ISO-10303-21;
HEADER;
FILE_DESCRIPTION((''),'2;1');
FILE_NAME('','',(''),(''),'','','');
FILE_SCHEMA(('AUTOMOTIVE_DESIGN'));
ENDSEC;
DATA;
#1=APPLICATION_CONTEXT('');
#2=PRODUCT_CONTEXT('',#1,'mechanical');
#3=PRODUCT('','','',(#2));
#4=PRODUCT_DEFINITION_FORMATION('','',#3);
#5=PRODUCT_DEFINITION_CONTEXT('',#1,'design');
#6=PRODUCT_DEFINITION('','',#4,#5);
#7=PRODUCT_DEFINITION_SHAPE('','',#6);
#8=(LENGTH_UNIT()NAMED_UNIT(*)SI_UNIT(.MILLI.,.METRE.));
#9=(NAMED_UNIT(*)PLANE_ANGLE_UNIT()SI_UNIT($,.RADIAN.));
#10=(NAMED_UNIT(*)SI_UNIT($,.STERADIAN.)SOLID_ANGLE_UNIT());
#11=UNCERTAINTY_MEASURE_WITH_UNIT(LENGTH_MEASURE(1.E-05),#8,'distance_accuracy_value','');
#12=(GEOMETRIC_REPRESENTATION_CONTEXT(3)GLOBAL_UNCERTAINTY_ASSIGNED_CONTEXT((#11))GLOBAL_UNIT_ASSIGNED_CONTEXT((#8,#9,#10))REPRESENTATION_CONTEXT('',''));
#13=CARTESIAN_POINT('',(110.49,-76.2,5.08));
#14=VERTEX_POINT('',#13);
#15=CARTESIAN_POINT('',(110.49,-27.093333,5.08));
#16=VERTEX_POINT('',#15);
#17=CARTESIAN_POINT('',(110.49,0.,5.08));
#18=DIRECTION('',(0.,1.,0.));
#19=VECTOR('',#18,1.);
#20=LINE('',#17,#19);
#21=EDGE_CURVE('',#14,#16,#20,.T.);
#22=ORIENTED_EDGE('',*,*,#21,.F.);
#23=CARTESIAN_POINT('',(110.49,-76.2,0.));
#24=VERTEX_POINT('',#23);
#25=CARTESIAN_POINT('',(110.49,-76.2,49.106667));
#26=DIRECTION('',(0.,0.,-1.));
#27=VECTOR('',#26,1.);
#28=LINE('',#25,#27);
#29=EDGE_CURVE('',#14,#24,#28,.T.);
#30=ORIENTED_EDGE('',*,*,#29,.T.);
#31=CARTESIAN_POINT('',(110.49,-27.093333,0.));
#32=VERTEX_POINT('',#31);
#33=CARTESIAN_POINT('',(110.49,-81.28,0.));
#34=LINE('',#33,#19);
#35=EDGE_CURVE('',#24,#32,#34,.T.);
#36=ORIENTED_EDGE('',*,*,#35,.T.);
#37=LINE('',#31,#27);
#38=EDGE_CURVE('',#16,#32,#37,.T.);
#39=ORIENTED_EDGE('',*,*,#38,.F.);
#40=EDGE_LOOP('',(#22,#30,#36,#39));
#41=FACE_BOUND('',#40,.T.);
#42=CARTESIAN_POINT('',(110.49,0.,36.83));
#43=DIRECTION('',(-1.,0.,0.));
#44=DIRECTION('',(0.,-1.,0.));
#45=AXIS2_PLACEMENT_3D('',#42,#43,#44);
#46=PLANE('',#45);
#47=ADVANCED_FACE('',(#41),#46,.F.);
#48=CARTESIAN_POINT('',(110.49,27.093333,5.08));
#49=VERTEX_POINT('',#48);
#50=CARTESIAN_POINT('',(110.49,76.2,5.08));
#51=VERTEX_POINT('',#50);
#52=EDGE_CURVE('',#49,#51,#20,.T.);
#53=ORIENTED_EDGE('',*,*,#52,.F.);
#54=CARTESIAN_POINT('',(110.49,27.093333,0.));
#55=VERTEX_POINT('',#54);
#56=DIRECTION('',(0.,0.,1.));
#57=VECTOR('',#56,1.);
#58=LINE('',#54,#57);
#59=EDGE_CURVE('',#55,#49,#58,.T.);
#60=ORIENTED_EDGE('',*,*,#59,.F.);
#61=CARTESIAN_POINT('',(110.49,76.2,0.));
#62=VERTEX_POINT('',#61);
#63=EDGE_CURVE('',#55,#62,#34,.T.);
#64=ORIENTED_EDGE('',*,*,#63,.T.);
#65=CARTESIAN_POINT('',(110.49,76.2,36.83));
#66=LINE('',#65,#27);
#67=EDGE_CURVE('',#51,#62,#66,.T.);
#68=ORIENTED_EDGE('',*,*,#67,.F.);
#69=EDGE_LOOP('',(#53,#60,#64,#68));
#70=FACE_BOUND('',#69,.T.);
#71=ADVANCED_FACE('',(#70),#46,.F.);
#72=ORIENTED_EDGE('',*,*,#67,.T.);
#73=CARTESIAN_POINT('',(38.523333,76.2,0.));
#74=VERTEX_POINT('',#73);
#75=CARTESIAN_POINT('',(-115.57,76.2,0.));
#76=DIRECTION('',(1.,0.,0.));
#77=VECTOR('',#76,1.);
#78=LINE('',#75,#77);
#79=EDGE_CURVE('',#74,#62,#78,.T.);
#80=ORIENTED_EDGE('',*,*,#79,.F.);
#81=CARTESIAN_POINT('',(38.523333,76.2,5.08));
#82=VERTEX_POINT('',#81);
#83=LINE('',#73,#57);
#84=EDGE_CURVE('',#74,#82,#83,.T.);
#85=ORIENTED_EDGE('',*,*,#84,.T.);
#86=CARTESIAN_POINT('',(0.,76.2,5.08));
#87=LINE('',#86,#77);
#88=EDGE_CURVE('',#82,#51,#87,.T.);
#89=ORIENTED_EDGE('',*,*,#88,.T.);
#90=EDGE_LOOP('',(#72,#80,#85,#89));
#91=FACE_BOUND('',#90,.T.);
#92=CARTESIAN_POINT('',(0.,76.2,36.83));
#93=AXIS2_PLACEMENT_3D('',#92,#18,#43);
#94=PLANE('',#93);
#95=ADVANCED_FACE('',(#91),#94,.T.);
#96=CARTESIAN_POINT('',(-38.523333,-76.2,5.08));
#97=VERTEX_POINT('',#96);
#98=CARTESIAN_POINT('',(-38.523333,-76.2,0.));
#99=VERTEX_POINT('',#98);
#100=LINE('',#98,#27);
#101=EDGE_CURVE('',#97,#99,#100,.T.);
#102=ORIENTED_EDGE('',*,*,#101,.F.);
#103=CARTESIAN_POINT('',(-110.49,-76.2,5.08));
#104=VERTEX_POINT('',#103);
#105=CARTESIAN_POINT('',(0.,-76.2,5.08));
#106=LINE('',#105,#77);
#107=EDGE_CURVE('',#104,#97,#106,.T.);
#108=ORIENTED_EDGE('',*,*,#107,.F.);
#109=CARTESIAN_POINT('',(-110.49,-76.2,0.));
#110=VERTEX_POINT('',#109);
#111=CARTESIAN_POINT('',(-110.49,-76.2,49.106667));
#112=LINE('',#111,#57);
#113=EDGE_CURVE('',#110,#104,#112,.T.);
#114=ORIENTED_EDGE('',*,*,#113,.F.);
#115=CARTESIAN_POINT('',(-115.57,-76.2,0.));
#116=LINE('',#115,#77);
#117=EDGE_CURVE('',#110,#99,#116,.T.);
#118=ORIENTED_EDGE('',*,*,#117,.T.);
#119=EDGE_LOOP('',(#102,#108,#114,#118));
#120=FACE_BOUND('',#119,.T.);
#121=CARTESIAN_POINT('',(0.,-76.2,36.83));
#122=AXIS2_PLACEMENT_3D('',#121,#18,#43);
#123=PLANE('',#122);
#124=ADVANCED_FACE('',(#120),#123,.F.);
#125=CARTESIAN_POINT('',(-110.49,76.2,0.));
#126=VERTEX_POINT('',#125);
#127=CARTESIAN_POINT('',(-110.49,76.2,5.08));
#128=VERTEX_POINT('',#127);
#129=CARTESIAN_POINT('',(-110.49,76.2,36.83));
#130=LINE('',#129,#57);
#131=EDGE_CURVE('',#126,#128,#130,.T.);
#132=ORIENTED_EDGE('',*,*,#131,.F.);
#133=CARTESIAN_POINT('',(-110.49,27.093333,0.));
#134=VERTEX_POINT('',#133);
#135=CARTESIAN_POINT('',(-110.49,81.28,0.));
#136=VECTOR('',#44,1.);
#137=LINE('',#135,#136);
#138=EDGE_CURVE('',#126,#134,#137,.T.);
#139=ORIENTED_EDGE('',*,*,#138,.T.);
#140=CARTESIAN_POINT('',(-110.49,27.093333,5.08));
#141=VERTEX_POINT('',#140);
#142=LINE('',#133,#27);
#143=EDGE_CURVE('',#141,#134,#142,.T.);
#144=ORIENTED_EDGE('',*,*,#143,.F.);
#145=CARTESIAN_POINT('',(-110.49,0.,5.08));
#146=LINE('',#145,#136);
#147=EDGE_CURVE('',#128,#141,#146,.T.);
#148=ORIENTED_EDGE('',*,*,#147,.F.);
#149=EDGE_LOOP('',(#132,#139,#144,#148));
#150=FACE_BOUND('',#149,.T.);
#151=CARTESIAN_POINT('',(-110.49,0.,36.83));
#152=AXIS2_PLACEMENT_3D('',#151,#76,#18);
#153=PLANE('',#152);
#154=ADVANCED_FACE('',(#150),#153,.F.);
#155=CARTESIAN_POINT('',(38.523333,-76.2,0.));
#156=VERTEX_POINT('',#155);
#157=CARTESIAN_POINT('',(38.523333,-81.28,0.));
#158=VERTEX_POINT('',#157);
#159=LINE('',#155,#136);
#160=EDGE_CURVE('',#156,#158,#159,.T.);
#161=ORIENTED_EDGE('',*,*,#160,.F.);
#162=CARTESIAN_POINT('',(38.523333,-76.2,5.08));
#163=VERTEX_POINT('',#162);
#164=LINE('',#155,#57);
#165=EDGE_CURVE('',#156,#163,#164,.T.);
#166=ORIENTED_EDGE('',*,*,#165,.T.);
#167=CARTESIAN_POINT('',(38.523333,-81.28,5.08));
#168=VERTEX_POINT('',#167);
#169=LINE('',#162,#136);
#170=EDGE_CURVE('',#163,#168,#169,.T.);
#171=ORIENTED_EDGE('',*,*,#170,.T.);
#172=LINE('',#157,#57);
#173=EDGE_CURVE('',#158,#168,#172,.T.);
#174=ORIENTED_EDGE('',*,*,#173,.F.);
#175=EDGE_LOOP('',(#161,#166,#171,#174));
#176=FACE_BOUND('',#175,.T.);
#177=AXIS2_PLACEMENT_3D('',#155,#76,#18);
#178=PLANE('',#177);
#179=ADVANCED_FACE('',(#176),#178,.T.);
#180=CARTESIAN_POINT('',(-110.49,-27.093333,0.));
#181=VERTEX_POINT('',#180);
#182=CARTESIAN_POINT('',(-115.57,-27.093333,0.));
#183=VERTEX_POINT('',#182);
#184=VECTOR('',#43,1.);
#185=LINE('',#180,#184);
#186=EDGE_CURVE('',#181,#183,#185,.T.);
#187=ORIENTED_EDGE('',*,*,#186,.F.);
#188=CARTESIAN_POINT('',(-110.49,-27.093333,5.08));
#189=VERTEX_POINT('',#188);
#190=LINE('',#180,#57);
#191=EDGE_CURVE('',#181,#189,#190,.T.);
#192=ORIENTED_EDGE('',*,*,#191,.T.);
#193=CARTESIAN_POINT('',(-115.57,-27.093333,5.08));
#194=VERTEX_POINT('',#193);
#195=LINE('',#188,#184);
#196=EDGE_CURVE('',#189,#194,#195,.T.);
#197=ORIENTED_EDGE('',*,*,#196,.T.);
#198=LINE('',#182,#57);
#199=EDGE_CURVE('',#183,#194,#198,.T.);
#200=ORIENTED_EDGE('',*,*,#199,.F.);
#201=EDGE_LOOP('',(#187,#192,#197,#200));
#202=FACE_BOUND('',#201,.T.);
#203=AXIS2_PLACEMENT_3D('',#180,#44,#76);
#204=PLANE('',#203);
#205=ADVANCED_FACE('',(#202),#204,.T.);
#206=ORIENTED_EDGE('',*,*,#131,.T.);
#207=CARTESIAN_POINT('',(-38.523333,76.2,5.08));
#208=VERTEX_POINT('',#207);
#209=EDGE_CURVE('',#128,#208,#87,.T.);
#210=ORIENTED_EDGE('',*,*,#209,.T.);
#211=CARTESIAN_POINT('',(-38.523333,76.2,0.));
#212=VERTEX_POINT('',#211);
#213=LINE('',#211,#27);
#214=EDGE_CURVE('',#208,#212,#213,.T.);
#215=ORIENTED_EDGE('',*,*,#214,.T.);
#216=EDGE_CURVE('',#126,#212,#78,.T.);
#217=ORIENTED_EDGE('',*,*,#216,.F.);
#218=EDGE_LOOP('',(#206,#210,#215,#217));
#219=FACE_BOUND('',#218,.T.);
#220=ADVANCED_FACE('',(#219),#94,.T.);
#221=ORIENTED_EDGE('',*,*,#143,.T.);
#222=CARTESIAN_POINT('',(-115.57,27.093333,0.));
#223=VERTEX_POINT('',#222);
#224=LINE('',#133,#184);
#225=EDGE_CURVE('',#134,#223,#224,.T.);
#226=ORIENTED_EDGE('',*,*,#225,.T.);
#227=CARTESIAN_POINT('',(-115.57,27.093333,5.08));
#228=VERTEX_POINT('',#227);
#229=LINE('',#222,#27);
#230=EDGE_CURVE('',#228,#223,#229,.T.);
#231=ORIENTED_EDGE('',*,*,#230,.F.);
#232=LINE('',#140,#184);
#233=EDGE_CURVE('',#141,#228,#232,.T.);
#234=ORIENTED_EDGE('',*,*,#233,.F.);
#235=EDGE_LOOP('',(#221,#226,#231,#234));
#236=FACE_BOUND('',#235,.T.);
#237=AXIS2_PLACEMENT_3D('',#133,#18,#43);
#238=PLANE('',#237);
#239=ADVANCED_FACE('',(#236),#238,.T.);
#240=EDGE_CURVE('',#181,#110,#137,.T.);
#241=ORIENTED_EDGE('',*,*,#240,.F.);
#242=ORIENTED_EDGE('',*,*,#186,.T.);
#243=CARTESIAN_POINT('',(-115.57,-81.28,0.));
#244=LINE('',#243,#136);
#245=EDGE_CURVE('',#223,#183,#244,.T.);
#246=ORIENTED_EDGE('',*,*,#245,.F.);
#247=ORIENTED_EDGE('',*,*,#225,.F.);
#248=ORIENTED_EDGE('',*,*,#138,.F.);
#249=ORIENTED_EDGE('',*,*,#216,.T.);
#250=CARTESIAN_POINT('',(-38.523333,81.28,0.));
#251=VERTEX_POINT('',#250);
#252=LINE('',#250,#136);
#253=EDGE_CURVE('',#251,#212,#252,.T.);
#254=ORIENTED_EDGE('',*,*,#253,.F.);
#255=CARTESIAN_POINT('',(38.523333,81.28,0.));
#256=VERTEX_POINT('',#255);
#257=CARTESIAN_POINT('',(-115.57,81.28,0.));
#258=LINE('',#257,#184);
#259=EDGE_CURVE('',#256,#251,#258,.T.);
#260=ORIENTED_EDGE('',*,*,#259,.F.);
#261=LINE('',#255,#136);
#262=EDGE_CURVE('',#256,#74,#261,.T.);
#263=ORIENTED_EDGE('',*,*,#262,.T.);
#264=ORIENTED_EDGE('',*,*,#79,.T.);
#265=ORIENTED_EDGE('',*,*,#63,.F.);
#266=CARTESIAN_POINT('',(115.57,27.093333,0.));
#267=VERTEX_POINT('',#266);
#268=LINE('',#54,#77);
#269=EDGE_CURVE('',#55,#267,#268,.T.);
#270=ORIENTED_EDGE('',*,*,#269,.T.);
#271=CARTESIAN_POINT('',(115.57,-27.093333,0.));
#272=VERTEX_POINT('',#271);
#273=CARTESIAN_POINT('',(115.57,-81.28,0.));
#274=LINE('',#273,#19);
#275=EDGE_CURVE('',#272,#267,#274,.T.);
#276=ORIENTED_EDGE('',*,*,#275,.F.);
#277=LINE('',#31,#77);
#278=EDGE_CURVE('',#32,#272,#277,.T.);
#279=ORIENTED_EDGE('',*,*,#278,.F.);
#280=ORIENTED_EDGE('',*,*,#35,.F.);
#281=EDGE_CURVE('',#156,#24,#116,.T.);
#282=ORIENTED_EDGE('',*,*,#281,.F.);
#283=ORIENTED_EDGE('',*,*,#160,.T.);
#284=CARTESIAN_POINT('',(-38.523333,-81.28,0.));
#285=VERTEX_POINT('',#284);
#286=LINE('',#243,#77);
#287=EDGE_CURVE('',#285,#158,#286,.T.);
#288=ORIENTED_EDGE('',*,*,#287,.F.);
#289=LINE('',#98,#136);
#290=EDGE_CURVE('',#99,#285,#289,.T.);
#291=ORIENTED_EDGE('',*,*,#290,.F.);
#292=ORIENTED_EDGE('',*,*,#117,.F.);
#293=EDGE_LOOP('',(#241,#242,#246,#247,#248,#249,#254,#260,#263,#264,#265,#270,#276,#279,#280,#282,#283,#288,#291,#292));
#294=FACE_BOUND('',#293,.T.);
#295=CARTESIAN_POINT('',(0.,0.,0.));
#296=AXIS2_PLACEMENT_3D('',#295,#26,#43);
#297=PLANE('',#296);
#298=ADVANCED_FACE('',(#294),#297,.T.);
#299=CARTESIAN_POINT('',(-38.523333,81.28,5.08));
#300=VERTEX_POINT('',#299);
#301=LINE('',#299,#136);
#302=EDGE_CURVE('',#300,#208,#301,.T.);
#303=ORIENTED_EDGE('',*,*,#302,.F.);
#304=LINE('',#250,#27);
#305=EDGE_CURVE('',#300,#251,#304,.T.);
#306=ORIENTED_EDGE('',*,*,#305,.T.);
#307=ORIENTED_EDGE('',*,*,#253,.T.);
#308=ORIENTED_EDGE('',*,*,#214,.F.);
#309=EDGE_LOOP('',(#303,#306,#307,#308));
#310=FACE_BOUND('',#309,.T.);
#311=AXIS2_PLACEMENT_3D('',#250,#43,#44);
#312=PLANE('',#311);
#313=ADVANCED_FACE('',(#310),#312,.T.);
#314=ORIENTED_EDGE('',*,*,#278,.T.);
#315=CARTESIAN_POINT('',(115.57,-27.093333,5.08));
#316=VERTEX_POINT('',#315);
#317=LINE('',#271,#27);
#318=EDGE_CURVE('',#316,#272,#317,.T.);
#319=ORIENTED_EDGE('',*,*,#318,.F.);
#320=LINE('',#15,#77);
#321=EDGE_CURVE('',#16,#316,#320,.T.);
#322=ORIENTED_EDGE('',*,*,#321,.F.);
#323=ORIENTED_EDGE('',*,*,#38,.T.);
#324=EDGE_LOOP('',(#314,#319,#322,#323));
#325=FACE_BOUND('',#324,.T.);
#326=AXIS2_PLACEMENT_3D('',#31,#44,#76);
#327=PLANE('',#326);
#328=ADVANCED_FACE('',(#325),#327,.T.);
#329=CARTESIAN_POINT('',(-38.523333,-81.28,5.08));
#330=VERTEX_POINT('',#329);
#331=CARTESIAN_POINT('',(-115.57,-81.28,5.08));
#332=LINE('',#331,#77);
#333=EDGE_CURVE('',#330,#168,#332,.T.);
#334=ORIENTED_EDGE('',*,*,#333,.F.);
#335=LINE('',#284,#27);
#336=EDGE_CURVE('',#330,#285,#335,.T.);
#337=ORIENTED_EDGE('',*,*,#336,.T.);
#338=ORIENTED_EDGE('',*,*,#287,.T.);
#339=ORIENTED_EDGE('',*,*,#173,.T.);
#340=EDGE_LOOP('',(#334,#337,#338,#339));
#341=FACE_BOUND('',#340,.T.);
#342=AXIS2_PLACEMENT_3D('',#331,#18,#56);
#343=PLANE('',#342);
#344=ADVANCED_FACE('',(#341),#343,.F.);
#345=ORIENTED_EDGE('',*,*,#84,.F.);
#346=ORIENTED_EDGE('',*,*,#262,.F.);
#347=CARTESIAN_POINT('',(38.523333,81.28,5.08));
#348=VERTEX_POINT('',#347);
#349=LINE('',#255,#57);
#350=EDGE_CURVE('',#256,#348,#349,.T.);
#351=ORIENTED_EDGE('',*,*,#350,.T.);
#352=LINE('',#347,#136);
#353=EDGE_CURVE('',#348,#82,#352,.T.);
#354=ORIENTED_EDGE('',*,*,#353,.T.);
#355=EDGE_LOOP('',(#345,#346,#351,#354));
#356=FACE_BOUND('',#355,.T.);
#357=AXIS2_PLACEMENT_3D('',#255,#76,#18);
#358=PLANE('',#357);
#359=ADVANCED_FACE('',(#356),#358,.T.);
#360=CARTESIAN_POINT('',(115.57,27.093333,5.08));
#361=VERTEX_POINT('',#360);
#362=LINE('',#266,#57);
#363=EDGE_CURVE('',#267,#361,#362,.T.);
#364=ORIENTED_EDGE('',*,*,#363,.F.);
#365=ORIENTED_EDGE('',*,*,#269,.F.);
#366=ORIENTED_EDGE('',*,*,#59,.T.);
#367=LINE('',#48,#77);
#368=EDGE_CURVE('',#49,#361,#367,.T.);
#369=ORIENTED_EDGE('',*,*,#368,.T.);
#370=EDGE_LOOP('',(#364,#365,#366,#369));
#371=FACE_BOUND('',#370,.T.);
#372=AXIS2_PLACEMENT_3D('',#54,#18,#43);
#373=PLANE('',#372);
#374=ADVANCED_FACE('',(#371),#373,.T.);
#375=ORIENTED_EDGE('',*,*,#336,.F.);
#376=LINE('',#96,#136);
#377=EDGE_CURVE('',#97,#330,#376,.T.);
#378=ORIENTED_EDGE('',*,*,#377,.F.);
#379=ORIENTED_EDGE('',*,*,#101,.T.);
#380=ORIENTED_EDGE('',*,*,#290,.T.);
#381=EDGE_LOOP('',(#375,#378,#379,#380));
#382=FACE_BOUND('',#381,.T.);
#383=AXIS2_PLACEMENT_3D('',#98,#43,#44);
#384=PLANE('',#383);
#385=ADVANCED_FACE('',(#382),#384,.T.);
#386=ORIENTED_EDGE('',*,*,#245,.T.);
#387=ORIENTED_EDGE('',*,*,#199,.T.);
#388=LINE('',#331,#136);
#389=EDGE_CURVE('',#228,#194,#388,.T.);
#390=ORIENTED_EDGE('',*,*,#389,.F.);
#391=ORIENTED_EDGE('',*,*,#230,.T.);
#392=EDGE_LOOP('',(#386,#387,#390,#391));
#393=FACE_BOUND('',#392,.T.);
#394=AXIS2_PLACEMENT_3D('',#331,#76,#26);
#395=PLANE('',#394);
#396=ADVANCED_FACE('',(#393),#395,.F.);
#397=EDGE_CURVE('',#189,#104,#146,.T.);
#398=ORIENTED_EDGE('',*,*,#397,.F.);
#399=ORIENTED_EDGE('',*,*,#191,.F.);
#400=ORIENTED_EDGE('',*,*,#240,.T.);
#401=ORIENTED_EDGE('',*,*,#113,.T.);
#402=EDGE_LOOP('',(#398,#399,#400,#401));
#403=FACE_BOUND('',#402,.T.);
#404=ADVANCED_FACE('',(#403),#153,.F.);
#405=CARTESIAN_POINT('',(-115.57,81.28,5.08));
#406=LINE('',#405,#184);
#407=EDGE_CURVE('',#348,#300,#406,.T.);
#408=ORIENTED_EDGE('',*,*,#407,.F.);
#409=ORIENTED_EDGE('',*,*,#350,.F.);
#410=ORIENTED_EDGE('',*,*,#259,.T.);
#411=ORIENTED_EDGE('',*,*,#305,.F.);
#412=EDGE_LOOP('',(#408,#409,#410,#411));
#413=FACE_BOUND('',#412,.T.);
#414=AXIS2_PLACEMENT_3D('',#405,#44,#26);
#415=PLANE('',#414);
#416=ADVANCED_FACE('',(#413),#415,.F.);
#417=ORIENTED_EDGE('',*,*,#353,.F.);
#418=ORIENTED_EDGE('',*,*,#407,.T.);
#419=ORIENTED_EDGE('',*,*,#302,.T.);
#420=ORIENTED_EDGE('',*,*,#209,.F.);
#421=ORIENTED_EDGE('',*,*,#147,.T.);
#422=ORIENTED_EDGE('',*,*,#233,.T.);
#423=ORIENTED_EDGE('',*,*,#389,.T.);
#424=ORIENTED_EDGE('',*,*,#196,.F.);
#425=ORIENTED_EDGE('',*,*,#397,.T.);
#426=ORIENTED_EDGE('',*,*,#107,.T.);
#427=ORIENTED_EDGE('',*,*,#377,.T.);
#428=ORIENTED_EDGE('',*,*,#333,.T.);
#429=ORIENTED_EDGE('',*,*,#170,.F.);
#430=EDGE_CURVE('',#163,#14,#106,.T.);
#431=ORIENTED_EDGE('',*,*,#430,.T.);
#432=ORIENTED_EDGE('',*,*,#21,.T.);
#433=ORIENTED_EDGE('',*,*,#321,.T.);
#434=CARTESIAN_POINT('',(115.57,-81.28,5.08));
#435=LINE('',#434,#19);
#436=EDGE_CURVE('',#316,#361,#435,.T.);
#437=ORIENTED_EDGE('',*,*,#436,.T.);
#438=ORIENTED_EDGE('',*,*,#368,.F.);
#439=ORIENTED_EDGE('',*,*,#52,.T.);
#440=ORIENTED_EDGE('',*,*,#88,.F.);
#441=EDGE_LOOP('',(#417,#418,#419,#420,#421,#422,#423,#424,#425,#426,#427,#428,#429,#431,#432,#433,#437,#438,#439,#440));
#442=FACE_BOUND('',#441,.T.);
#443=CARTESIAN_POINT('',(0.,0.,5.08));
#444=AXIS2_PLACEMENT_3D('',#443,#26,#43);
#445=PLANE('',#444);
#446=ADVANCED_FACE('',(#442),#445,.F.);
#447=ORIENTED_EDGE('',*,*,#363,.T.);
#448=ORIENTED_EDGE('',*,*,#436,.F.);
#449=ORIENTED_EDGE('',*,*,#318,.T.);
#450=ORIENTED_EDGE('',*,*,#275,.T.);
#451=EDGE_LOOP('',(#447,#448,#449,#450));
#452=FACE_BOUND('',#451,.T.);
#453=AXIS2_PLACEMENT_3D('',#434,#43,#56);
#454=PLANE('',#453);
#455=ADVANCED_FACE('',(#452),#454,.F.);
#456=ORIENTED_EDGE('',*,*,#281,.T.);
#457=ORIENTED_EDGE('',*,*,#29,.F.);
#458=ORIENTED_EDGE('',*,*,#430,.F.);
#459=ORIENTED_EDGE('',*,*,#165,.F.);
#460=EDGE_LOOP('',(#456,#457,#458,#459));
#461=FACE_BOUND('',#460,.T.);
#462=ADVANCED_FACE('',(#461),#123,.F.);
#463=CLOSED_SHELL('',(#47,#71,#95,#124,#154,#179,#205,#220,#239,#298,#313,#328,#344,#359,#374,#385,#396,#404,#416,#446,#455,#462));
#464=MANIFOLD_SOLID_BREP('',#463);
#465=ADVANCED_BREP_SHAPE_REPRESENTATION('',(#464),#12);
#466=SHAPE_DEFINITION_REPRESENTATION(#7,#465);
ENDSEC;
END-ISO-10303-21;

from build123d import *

# Parameters (mm, degrees)
SKETCH1_W           = 231.14
SKETCH1_H           = 162.56
BOSS_EXTRUDE1_DEPTH = 5.08
CAVITY1_START       = -115.57
CAVITY1_OUTLINE_W   = 5.08
CAVITY1_OUTLINE_H   = 5.08
CAVITY1_DEPTH       = 77.046666667
CAVITY1_START_2     = 38.523333333
CAVITY1_2_OUTLINE_W = 5.08
CAVITY1_2_OUTLINE_H = 5.08
CAVITY1_2_DEPTH     = 77.046666667
CAVITY1_3_OUTLINE_W = 49.106666667
CAVITY1_3_OUTLINE_H = 5.08
CAVITY1_3_DEPTH     = 5.08
CAVITY1_START_3     = 110.49
CAVITY1_4_OUTLINE_W = 49.106666667
CAVITY1_4_OUTLINE_H = 5.08
CAVITY1_4_DEPTH     = 5.08


# Read off the part's stored shape, not the designer's step: Cavity1
with BuildPart() as part:
    # Sketch1 → Boss-Extrude1 (new body)
    with BuildSketch(Plane.XY):
        Rectangle(SKETCH1_W, SKETCH1_H)
    extrude(amount=BOSS_EXTRUDE1_DEPTH)

    # Cavity1 outline → Cavity1 (cut)
    with BuildSketch(Plane.YZ.offset(CAVITY1_START)):
        with Locations((78.74, 2.54)):
            Rectangle(CAVITY1_OUTLINE_W, CAVITY1_OUTLINE_H)
        with Locations((-78.74, 2.54)):
            Rectangle(CAVITY1_OUTLINE_W, CAVITY1_OUTLINE_H)
    extrude(amount=CAVITY1_DEPTH, mode=Mode.SUBTRACT)

    # Cavity1 2 outline → Cavity1 2 (cut)
    with BuildSketch(Plane.YZ.offset(CAVITY1_START_2)):
        with Locations((78.74, 2.54)):
            Rectangle(CAVITY1_2_OUTLINE_W, CAVITY1_2_OUTLINE_H)
        with Locations((-78.74, 2.54)):
            Rectangle(CAVITY1_2_OUTLINE_W, CAVITY1_2_OUTLINE_H)
    extrude(amount=CAVITY1_2_DEPTH, mode=Mode.SUBTRACT)

    # Cavity1 3 outline → Cavity1 3 (cut)
    with BuildSketch(Plane.YZ.offset(CAVITY1_START)):
        with Locations((51.646666667, 2.54)):
            Rectangle(CAVITY1_3_OUTLINE_W, CAVITY1_3_OUTLINE_H)
        with Locations((-51.646666667, 2.54)):
            Rectangle(CAVITY1_3_OUTLINE_W, CAVITY1_3_OUTLINE_H)
    extrude(amount=CAVITY1_3_DEPTH, mode=Mode.SUBTRACT)

    # Cavity1 4 outline → Cavity1 4 (cut)
    with BuildSketch(Plane.YZ.offset(CAVITY1_START_3)):
        with Locations((51.646666667, 2.54)):
            Rectangle(CAVITY1_4_OUTLINE_W, CAVITY1_4_OUTLINE_H)
        with Locations((-51.646666667, 2.54)):
            Rectangle(CAVITY1_4_OUTLINE_W, CAVITY1_4_OUTLINE_H)
    extrude(amount=CAVITY1_4_DEPTH, mode=Mode.SUBTRACT)


solid = part.part
